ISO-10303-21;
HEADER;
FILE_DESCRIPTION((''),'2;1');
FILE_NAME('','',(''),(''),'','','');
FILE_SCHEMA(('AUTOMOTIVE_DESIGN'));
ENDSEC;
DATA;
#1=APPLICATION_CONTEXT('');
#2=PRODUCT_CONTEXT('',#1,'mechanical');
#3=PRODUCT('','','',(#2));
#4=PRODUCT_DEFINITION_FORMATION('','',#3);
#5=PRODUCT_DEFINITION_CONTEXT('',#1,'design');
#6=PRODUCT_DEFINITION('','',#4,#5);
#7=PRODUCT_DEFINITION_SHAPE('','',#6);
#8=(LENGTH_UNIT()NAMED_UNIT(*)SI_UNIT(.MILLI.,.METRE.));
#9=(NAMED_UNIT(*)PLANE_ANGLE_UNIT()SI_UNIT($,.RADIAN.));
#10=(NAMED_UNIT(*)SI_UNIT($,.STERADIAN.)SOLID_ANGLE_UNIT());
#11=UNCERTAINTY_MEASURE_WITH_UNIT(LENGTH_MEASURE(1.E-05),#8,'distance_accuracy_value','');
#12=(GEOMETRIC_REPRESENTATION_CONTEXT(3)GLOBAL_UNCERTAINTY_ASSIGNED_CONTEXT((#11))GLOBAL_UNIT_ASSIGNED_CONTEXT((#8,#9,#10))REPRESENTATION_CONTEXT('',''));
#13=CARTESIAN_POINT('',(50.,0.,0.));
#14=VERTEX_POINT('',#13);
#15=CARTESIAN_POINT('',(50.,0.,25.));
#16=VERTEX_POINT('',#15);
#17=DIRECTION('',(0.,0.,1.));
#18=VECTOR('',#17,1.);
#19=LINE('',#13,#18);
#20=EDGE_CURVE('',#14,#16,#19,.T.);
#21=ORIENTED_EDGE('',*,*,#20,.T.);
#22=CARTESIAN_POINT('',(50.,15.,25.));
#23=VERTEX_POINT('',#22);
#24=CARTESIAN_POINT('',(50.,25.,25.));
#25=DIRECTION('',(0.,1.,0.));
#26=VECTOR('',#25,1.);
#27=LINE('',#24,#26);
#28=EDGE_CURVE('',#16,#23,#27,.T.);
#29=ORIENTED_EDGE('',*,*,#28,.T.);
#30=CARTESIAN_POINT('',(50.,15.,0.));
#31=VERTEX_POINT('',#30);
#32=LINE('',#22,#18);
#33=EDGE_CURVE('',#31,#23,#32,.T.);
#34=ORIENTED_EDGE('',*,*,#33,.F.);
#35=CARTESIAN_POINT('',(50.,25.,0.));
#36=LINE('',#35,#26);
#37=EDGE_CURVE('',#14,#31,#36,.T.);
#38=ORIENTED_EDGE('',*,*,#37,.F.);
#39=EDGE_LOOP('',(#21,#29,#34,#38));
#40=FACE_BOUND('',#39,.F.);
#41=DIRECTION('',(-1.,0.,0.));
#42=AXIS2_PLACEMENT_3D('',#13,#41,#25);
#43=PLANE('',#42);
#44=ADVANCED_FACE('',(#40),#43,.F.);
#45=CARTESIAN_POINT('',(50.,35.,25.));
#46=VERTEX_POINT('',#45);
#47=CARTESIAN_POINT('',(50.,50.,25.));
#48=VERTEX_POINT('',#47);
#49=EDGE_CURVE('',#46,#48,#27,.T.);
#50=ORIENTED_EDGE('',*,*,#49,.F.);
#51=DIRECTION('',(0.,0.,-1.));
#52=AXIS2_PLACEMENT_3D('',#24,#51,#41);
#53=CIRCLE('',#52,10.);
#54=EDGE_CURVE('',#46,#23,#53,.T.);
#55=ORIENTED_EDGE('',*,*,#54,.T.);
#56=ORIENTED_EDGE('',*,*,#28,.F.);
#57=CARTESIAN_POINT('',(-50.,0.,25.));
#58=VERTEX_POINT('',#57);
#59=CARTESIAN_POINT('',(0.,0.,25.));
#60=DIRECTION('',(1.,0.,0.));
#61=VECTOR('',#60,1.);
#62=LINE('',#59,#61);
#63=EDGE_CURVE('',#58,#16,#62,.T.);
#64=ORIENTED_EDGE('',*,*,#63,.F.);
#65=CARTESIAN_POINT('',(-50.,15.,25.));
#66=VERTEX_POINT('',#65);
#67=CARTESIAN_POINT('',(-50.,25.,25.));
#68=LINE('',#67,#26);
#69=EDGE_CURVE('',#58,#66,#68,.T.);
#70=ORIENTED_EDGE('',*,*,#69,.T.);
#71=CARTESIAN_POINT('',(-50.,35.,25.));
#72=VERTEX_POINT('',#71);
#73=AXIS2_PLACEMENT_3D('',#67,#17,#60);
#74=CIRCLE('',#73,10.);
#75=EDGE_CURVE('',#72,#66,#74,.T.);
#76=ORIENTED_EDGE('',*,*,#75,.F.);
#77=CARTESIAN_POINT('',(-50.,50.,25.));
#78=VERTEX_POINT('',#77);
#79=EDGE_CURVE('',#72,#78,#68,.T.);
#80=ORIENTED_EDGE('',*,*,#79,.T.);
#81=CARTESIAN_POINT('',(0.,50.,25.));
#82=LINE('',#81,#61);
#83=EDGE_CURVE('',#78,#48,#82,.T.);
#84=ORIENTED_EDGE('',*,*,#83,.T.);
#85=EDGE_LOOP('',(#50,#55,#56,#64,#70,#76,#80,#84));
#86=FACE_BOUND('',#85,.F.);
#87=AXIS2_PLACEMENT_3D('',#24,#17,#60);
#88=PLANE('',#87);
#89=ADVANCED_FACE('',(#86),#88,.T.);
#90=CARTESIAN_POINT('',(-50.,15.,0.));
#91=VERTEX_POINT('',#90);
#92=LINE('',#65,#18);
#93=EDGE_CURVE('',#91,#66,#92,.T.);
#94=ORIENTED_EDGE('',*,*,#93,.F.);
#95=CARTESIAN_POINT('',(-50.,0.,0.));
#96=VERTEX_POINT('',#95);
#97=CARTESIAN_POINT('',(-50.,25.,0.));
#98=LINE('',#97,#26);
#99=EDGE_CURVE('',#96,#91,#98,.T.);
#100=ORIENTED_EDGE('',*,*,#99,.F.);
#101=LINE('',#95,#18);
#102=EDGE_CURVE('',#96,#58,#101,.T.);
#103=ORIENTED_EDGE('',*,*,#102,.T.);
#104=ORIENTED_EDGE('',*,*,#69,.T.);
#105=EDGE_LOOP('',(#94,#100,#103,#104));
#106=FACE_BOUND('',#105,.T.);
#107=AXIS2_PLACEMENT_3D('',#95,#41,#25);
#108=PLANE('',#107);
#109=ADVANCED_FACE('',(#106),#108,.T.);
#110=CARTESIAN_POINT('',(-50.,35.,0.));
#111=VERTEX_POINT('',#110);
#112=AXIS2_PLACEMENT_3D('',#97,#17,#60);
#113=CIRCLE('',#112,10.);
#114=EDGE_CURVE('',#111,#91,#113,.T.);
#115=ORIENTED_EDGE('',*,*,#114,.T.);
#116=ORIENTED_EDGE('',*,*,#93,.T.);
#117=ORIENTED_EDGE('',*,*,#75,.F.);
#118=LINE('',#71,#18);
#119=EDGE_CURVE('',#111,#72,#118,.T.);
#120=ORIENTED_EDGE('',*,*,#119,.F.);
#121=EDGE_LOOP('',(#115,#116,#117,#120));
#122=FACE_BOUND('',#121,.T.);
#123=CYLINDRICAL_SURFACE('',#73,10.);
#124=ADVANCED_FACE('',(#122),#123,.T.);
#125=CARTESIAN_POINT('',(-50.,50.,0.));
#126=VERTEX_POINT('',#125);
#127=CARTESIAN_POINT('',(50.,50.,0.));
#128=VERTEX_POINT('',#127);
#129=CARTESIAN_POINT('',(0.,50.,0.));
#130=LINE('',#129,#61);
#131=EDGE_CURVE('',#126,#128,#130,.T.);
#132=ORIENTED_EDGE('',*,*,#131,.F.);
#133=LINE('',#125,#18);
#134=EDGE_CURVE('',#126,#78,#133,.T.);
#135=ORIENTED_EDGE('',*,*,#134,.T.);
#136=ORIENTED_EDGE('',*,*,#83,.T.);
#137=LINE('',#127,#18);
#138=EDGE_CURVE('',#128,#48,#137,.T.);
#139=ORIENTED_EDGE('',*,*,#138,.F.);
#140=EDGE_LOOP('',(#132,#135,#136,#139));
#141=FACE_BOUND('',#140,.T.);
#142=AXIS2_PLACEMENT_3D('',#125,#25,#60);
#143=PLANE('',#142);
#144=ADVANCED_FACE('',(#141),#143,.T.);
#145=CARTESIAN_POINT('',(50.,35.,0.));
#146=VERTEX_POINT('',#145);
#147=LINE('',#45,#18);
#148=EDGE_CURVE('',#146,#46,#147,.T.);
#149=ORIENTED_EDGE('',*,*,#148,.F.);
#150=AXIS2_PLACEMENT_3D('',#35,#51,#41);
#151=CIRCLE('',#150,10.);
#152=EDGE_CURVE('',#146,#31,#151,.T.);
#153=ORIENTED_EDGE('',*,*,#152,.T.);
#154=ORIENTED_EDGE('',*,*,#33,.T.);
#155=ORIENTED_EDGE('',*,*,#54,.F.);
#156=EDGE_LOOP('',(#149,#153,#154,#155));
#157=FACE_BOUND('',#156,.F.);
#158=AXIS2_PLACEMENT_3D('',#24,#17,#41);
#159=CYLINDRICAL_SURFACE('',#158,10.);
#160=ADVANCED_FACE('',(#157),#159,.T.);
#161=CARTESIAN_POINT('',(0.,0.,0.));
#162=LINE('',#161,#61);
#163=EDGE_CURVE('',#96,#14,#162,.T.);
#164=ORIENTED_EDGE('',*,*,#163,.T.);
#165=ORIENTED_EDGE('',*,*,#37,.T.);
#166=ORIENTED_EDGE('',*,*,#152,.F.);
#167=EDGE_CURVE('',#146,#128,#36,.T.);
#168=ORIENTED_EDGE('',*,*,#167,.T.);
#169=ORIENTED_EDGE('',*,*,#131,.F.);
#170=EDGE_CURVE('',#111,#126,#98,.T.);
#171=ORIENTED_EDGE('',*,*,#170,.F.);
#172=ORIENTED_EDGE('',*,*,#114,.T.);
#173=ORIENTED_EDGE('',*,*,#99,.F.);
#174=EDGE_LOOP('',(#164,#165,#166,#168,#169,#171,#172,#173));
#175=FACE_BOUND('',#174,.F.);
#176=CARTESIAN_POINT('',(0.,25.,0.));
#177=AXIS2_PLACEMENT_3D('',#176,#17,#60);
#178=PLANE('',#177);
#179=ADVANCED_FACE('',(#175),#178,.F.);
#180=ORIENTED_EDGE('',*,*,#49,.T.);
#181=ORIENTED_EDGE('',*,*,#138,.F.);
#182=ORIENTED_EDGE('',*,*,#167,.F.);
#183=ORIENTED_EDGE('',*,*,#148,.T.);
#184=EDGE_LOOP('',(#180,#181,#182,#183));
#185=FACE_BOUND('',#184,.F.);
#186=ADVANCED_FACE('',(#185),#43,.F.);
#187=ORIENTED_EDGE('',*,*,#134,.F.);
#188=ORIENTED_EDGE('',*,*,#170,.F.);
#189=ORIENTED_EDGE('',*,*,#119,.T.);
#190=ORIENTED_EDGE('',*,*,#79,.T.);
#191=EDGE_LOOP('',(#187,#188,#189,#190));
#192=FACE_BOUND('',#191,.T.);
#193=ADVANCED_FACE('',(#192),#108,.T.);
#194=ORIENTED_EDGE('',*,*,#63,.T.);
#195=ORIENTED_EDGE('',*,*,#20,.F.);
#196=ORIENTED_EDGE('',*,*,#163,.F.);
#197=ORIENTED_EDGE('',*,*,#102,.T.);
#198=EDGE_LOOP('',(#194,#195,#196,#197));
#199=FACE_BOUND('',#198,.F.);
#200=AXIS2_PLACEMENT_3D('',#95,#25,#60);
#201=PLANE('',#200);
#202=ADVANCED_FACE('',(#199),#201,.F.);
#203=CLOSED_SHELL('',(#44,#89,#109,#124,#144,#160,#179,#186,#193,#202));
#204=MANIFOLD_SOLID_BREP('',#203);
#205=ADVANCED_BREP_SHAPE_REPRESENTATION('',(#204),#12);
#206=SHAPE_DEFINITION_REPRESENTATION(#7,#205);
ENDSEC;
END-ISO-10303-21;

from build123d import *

# Parameters (mm, degrees)
F0_W     = 100
F0_H     = 50
F1_DEPTH = 25
F2_R     = 10
F3_DEPTH = 25


# Not quite as in the source:
# - a pattern or mirror of a feature is missing from the dataset's text; its kind, count and spacing are read off the source's solid


with BuildPart() as f1:
    # F0 (on Top) → F1 (new body)
    with BuildSketch(Plane.XY):
        with Locations((0, 25)):
            Rectangle(F0_W, F0_H)
    extrude(amount=F1_DEPTH)

    # F2 (on face) → F3 (join, through all)
    with BuildSketch(Plane.XY.offset(25)):
        with Locations((-50, 25)):
            Circle(F2_R)
    f3 = extrude(amount=-F3_DEPTH)

    # F3_copies: F3 across plane
    add(f3.mirror(Plane(origin=(0, 0, 0), x_dir=(0, 0, 1), z_dir=(1, 0, 0))))


solid = f1.part
